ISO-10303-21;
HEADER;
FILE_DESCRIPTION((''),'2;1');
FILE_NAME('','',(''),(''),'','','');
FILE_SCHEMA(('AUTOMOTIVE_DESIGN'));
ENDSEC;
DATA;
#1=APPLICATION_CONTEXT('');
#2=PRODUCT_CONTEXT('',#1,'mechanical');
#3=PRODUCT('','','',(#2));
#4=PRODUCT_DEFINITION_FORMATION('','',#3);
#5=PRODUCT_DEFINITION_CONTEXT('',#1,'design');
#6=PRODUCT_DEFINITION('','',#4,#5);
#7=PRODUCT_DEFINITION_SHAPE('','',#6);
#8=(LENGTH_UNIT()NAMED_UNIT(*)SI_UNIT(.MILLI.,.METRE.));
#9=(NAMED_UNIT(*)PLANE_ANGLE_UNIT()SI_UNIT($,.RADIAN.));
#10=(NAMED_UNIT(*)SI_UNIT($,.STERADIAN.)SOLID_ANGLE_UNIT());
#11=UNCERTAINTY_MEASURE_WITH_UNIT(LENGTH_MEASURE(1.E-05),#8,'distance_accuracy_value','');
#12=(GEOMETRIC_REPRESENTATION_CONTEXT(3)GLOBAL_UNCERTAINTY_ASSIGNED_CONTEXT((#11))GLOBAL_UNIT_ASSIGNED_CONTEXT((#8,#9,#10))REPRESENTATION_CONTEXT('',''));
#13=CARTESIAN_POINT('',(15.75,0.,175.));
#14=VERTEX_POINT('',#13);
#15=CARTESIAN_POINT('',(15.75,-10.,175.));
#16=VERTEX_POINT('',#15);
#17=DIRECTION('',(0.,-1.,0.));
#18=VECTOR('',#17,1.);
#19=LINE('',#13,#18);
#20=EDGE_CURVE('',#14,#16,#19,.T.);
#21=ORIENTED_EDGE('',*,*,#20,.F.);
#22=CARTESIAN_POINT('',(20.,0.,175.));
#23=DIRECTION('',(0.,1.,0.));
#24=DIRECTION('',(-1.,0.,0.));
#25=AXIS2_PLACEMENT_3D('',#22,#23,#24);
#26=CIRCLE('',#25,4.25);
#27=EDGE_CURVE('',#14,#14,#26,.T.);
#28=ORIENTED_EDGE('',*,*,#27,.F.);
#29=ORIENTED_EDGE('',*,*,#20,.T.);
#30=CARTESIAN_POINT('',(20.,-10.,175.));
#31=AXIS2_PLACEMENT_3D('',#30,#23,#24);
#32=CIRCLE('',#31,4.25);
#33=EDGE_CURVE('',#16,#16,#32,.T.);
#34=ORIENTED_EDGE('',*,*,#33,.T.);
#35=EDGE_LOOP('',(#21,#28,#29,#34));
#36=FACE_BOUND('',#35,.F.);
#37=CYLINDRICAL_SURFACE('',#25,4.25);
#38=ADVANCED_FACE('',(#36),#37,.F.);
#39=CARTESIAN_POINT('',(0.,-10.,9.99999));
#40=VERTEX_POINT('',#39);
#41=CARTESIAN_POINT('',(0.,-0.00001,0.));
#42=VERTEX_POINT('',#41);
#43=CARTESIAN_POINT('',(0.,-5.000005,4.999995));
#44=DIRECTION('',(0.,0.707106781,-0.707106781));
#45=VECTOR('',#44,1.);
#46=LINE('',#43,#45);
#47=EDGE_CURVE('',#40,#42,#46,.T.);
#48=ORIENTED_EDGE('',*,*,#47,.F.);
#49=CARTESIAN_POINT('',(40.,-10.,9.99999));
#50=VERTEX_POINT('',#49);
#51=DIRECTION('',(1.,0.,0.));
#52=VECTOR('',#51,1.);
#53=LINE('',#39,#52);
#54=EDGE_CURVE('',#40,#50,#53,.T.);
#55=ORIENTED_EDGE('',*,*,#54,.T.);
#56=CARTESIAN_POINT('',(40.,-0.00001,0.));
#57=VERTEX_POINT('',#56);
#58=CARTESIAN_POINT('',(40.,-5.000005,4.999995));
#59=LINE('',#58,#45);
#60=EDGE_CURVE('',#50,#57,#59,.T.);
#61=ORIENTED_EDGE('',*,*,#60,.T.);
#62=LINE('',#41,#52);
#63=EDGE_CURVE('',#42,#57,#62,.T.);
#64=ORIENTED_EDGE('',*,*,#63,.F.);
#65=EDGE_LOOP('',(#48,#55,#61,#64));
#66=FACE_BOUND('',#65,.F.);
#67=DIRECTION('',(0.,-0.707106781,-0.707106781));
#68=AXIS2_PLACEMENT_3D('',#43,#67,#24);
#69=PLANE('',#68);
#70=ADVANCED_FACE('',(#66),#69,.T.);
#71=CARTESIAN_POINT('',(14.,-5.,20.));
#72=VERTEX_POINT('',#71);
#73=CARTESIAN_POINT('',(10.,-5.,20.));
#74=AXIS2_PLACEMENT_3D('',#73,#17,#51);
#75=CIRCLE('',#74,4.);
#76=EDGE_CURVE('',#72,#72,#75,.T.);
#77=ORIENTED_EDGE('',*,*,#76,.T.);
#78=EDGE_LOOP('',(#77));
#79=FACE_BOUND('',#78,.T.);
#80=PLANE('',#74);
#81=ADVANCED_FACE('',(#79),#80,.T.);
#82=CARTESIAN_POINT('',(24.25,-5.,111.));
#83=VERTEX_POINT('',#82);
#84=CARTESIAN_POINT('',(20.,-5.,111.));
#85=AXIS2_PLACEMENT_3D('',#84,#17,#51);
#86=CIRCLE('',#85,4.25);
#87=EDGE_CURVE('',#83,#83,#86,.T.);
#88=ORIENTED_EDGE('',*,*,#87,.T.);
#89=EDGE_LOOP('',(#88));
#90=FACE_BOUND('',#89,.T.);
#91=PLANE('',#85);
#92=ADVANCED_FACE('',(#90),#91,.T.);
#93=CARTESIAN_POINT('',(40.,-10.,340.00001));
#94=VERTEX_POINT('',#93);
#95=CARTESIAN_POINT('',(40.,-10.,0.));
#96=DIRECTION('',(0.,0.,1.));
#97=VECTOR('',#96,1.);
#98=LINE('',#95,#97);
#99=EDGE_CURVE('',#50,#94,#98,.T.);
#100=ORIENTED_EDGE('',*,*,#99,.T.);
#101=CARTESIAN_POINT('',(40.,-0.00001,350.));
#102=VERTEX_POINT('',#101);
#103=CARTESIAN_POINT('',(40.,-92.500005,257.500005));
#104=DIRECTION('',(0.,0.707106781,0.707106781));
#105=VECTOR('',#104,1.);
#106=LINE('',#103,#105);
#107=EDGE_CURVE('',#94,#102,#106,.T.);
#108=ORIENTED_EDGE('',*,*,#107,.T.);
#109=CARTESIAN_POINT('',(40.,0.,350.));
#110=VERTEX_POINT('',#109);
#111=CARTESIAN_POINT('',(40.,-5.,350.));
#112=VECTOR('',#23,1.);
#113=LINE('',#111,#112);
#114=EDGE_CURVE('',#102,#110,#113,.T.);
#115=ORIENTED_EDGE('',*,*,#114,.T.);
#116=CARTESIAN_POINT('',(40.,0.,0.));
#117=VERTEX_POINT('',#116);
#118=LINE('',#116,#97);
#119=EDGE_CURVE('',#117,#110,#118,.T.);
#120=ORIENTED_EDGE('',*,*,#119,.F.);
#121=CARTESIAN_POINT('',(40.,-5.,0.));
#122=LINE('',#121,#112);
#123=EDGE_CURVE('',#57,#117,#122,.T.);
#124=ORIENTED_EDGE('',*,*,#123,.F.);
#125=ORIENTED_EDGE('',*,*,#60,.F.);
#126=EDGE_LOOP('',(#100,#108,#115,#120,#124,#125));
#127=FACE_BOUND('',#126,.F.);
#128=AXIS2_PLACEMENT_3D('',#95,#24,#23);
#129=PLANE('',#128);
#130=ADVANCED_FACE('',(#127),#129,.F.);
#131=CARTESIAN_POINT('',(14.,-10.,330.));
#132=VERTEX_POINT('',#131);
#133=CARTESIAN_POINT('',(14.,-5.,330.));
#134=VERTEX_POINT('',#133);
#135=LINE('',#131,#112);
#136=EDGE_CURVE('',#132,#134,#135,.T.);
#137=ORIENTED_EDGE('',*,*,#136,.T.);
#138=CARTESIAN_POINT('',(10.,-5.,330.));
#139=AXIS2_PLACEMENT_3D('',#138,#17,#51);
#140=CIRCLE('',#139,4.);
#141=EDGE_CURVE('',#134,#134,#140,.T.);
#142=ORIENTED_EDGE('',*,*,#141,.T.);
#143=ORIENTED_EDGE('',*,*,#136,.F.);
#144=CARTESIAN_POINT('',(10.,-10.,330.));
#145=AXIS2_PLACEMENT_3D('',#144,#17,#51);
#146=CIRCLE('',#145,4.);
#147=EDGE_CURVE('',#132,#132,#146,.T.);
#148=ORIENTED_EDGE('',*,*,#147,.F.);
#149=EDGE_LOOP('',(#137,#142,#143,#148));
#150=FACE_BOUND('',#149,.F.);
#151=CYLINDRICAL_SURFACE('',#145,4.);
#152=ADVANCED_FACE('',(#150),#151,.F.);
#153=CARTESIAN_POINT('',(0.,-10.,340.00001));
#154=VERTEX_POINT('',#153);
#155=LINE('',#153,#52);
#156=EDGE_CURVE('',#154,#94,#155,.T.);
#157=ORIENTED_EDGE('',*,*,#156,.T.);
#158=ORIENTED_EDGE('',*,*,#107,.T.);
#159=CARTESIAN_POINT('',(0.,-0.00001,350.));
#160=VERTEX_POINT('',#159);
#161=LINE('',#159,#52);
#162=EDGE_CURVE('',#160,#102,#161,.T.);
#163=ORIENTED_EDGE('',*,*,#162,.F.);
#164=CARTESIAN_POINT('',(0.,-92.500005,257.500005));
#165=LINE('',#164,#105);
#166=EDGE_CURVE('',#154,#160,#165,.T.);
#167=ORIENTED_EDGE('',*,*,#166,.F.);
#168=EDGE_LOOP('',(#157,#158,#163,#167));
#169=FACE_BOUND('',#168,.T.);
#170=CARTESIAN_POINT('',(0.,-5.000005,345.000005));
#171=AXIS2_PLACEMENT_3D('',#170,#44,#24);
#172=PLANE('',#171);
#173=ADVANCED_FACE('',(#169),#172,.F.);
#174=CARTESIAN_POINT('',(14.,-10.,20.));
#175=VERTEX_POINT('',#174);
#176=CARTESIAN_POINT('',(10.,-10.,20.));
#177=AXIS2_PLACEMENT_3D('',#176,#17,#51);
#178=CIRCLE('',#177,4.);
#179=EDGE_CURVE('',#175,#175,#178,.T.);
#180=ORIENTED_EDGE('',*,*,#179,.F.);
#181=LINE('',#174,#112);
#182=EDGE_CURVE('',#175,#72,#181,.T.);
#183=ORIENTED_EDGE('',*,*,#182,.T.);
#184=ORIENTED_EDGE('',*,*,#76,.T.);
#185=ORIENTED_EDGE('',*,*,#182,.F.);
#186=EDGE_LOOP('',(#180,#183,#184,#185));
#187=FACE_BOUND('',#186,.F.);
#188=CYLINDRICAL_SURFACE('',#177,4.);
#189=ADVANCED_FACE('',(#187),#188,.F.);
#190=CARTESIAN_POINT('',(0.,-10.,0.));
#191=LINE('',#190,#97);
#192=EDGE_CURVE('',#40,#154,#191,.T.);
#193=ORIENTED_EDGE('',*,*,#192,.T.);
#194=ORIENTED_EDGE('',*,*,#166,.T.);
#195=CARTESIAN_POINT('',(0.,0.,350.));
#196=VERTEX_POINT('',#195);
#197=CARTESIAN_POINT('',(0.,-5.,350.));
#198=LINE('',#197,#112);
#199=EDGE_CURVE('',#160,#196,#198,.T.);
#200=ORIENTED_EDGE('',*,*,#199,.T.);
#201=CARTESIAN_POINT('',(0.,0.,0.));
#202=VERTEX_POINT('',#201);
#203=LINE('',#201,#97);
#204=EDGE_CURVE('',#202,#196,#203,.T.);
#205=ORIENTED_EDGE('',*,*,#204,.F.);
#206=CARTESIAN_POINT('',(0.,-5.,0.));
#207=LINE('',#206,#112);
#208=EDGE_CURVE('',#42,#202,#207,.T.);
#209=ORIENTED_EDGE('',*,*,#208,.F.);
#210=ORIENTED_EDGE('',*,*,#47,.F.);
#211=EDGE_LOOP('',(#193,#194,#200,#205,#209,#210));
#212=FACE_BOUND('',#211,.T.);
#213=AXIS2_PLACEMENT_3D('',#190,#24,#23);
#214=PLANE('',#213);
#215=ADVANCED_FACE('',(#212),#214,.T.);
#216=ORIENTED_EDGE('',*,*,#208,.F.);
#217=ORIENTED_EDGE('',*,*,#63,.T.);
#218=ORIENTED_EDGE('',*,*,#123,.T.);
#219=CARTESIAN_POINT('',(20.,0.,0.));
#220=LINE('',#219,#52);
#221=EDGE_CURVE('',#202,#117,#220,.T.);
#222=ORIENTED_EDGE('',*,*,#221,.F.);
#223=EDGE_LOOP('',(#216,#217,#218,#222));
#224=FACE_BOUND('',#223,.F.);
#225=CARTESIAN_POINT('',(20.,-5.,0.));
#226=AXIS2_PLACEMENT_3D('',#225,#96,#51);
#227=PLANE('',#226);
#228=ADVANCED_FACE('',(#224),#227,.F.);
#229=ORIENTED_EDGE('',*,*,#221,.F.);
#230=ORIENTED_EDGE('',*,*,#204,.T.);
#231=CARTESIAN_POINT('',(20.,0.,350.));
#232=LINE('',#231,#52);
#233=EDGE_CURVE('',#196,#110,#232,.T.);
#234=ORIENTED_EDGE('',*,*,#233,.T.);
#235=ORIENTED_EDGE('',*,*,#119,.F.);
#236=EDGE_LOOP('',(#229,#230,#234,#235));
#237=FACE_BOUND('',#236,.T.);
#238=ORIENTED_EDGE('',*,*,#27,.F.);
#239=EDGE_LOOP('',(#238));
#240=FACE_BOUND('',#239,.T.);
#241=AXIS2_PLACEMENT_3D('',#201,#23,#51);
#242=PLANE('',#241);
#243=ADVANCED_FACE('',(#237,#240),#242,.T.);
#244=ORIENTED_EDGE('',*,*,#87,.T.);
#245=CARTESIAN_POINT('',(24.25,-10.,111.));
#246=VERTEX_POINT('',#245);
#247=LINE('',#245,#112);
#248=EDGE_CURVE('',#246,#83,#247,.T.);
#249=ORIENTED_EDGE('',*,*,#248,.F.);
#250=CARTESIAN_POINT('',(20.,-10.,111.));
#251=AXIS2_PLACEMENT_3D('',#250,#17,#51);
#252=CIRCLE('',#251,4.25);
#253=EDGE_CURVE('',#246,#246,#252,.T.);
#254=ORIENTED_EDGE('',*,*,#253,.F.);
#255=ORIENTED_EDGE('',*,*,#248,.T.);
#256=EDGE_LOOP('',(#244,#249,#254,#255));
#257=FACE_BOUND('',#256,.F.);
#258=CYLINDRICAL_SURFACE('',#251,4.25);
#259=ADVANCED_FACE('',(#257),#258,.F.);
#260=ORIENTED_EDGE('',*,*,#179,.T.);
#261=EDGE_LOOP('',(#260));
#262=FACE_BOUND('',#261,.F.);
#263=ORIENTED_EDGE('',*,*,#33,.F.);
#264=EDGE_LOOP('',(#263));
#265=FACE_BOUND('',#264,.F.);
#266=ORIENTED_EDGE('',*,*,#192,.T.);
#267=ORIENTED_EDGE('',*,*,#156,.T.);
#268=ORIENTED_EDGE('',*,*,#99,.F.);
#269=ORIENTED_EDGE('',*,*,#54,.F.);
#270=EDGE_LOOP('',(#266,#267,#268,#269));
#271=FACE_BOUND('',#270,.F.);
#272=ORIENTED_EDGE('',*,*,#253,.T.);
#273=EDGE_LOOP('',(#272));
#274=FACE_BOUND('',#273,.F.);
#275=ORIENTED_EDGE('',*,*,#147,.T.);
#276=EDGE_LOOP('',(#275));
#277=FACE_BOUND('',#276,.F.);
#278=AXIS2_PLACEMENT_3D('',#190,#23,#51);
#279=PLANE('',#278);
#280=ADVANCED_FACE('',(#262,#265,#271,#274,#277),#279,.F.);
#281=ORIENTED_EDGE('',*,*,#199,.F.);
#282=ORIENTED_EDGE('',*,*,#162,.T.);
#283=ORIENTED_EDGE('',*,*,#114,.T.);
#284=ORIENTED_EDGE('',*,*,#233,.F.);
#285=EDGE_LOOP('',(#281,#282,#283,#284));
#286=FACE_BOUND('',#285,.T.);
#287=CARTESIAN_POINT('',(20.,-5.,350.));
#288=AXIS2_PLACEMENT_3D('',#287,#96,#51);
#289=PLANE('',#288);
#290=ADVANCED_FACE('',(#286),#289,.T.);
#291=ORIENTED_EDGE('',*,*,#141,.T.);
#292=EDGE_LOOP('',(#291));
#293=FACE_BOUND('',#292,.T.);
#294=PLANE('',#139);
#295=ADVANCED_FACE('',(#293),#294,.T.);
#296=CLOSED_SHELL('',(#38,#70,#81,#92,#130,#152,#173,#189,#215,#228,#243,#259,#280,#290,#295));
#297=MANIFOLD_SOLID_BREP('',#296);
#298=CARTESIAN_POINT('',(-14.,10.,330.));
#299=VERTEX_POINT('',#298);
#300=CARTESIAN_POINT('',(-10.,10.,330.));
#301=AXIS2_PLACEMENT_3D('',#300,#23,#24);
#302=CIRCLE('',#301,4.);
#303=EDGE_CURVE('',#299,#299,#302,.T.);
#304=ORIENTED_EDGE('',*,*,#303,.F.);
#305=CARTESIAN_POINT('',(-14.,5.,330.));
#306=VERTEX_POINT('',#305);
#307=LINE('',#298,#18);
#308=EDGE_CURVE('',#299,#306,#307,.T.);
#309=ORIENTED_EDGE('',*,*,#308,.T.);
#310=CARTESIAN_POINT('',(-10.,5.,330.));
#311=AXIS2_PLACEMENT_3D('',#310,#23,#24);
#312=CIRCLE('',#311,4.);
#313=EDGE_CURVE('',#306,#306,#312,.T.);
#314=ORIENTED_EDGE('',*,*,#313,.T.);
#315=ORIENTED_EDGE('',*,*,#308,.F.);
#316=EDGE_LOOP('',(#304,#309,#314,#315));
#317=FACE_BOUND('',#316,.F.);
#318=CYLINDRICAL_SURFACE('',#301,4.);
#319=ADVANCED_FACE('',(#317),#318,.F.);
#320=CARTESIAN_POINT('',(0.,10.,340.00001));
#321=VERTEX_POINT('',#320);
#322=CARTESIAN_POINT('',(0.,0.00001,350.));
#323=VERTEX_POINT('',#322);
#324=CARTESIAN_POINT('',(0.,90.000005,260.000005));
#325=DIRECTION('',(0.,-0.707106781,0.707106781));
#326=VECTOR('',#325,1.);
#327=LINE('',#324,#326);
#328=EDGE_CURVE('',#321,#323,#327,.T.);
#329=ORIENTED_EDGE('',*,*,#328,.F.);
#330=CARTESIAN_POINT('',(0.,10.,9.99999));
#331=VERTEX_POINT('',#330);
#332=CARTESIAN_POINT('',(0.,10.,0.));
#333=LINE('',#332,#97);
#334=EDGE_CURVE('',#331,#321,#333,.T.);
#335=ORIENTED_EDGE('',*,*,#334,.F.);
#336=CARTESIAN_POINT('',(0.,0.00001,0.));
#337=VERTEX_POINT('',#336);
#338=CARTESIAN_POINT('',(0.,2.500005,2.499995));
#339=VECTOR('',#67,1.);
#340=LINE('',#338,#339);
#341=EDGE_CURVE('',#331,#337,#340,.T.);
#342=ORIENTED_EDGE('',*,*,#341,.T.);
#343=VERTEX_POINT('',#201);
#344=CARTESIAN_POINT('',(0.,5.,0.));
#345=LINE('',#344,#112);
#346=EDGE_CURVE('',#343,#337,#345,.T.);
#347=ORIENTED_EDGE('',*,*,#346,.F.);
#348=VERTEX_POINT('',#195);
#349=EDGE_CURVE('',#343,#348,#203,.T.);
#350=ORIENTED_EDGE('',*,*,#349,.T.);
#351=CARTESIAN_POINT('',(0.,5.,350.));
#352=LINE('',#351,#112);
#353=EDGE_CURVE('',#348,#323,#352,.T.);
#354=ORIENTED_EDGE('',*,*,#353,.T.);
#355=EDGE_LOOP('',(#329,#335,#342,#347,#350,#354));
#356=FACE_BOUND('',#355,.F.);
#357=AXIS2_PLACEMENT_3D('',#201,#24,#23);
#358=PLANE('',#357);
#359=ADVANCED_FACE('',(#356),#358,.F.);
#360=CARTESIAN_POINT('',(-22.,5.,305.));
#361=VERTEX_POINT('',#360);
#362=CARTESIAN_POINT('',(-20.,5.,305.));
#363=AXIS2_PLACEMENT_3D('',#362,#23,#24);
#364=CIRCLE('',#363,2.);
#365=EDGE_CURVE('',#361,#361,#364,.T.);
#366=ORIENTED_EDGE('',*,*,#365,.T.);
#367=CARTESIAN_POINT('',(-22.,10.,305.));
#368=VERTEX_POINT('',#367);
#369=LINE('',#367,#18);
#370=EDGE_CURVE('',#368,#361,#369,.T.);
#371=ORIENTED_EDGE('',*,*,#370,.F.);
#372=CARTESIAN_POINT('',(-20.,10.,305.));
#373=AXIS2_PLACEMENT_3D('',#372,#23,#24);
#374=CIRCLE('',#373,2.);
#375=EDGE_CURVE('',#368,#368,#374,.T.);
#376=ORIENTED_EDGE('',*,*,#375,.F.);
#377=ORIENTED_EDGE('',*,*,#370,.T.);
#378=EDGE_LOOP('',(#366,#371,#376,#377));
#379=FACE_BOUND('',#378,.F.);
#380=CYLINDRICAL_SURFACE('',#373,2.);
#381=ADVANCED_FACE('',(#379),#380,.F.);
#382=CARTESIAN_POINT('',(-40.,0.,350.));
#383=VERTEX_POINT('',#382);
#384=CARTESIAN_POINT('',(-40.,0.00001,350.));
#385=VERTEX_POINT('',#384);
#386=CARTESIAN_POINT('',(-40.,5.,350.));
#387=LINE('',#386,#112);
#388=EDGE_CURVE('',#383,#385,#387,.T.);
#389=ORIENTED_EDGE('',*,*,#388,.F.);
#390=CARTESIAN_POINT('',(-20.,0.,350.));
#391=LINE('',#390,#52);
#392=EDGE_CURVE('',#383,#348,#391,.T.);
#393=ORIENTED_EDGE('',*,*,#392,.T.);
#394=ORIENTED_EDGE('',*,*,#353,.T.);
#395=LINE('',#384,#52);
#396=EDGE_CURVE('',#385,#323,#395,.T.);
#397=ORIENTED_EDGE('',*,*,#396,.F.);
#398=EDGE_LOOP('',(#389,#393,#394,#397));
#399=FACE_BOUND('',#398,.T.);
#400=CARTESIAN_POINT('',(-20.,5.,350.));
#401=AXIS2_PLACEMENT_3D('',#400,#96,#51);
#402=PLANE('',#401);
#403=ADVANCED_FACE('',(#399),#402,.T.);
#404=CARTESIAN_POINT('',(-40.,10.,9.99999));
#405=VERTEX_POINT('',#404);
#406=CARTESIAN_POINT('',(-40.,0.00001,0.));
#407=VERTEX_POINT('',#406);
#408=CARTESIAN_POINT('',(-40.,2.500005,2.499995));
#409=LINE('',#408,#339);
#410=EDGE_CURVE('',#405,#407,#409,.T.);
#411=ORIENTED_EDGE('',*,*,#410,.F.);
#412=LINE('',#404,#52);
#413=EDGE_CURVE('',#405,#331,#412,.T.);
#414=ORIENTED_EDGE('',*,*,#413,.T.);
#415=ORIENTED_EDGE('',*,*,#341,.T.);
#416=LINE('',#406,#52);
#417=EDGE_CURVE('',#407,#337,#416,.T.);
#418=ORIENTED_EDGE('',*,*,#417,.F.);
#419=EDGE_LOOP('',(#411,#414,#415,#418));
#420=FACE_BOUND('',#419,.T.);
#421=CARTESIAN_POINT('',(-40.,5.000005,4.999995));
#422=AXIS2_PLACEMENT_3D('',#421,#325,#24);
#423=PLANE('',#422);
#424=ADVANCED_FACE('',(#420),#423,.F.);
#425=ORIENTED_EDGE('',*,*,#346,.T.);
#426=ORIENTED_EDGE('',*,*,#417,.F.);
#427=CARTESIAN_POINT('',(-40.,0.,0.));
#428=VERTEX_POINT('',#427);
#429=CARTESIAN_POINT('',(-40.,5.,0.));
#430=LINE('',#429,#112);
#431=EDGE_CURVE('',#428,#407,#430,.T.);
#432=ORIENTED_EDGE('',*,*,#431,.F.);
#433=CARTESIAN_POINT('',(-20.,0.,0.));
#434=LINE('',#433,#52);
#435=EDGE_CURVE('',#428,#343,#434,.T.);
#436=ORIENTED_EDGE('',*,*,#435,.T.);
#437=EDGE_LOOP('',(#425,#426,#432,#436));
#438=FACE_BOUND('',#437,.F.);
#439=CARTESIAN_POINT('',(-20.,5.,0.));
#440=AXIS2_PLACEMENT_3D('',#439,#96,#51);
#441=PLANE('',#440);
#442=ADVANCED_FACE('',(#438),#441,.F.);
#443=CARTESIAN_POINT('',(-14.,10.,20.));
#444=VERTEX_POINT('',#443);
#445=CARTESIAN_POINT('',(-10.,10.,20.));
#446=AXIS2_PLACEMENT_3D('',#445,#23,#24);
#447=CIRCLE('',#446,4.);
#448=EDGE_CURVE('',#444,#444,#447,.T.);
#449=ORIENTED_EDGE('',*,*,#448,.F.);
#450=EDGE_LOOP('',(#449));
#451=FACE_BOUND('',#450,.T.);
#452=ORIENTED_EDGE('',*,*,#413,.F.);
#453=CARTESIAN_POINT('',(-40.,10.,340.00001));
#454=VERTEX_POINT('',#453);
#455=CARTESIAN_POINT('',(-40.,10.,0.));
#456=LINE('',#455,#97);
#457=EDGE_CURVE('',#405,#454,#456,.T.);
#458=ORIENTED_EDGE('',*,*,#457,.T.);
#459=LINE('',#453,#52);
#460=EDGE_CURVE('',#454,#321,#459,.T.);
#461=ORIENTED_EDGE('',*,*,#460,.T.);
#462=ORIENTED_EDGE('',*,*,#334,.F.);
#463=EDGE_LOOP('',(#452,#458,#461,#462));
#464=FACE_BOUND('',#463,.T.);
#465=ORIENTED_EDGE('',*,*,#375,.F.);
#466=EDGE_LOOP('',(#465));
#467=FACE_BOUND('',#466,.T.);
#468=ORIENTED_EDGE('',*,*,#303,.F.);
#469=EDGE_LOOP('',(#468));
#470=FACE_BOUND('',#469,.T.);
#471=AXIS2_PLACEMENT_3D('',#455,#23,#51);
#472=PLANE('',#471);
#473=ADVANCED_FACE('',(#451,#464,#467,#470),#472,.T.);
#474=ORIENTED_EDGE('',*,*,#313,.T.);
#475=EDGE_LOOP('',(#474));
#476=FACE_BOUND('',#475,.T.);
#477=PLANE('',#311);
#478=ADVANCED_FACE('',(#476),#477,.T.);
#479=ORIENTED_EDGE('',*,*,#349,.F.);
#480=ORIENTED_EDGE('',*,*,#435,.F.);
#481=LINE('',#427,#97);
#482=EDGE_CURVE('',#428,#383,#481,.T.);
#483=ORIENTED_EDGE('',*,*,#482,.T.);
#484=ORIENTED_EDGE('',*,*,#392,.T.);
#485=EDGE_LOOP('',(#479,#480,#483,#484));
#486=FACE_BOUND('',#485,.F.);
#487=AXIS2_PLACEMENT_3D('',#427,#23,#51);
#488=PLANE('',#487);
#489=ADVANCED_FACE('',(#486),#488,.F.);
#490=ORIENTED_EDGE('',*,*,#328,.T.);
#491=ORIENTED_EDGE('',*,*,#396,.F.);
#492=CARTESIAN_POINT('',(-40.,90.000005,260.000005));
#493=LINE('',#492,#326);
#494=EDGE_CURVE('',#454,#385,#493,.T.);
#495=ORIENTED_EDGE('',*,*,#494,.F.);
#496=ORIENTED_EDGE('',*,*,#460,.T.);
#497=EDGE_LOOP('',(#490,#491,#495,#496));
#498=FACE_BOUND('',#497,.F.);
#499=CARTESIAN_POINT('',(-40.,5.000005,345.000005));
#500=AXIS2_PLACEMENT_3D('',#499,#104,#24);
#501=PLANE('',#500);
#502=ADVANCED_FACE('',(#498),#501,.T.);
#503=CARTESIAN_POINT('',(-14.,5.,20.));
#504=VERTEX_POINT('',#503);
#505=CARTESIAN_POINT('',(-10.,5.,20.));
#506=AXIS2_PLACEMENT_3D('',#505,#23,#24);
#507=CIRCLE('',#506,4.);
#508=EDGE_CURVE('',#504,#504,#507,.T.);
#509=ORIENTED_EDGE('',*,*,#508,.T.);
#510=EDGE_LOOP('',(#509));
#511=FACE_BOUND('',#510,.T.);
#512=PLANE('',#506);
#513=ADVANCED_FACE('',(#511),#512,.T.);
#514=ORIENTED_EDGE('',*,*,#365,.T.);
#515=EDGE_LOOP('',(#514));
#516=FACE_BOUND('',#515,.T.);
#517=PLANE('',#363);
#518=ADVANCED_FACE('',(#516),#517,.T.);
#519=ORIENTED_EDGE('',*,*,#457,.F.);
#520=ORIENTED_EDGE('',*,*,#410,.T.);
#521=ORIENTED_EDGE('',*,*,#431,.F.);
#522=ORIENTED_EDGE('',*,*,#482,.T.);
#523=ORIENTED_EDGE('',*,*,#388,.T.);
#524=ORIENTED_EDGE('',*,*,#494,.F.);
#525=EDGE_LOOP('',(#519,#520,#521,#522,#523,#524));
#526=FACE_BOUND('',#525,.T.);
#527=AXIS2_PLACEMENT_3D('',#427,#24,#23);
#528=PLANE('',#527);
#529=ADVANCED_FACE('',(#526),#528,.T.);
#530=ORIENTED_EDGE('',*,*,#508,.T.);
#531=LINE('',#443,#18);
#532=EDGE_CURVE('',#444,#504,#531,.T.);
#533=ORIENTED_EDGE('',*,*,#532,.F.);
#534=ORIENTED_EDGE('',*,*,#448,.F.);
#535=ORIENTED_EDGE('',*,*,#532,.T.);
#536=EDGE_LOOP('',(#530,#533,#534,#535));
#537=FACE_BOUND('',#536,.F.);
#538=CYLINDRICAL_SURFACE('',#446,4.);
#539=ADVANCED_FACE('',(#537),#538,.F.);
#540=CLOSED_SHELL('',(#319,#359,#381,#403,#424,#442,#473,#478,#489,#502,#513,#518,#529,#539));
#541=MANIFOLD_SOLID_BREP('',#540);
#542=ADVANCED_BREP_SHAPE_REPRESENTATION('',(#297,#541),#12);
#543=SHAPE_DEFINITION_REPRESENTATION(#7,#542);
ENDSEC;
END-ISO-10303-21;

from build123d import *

# Parameters (mm, degrees)
F0_W      = 40
F0_H      = 10
F1_DEPTH  = 350
F2_SIZE   = 9.99999
F3_SIZE   = 9.99999
F4_W      = 40
F4_H      = 10
F5_DEPTH  = 350
F6_SIZE   = 9.99999
F7_SIZE   = 9.99999
F8_R      = 4.25
F9_DEPTH  = 10.001
F10_R     = 2
F10_R_2   = 4
F11_DEPTH = 5
F12_R     = 4.25
F12_R_2   = 4
F13_DEPTH = 5


# Not quite as in the source:
# - a fillet or chamfer is up to 0.001 mm smaller than in the source, because OpenCascade refuses the exact size


with BuildPart() as f1:
    # F0 (on Top) → F1 (new body)
    with BuildSketch(Plane.XY):
        with Locations((-20, 5)):
            Rectangle(F0_W, F0_H)
    extrude(amount=F1_DEPTH)

    # F2 (size 10 in the source; OpenCascade refuses exactly that, so slightly less here)
    f2_edges = [f1.edges().sort_by_distance(p)[0] for p in [
        (-20, 10, 350),
    ]]
    chamfer(f2_edges, length=F2_SIZE)

    # F3 (size 10 in the source; OpenCascade refuses exactly that, so slightly less here)
    f3_edges = [f1.edges().sort_by_distance(p)[0] for p in [
        (-20, 10, 0),
    ]]
    chamfer(f3_edges, length=F3_SIZE)

    # F10 (on face) → F11 (cut)
    with BuildSketch(Plane(origin=(0, 10, 0), x_dir=(-1, 0, 0), z_dir=(0, 1, 0))):
        with Locations((20, 305)):
            Circle(F10_R)
        with Locations((10, 330)):
            Circle(F10_R_2)
        with Locations((10, 20)):
            Circle(F10_R_2)
    extrude(amount=-F11_DEPTH, mode=Mode.SUBTRACT)


with BuildPart() as f5:
    # F4 (on Top) → F5 (new body)
    with BuildSketch(Plane.XY):
        with Locations((20, -5)):
            Rectangle(F4_W, F4_H)
    extrude(amount=F5_DEPTH)

    # F6 (size 10 in the source; OpenCascade refuses exactly that, so slightly less here)
    f6_edges = [f5.edges().sort_by_distance(p)[0] for p in [
        (20, -10, 0),
    ]]
    chamfer(f6_edges, length=F6_SIZE)

    # F7 (size 10 in the source; OpenCascade refuses exactly that, so slightly less here)
    f7_edges = [f5.edges().sort_by_distance(p)[0] for p in [
        (20, -10, 350),
    ]]
    chamfer(f7_edges, length=F7_SIZE)

    # F8 (on face) → F9 (cut, through all)
    with BuildSketch(Plane(origin=(0, 0, 0), x_dir=(-1, 0, 0), z_dir=(0, 1, 0))):
        with Locations((-20, 175)):
            Circle(F8_R)
    extrude(amount=-F9_DEPTH, mode=Mode.SUBTRACT)

    # F12 (on face) → F13 (cut)
    with BuildSketch(Plane.XZ.offset(10)):
        with Locations((20, 111)):
            Circle(F12_R)
        with Locations((10, 20)):
            Circle(F12_R_2)
        with Locations((10, 330)):
            Circle(F12_R_2)
    extrude(amount=-F13_DEPTH, mode=Mode.SUBTRACT)


solid = Compound([f1.part, f5.part])
